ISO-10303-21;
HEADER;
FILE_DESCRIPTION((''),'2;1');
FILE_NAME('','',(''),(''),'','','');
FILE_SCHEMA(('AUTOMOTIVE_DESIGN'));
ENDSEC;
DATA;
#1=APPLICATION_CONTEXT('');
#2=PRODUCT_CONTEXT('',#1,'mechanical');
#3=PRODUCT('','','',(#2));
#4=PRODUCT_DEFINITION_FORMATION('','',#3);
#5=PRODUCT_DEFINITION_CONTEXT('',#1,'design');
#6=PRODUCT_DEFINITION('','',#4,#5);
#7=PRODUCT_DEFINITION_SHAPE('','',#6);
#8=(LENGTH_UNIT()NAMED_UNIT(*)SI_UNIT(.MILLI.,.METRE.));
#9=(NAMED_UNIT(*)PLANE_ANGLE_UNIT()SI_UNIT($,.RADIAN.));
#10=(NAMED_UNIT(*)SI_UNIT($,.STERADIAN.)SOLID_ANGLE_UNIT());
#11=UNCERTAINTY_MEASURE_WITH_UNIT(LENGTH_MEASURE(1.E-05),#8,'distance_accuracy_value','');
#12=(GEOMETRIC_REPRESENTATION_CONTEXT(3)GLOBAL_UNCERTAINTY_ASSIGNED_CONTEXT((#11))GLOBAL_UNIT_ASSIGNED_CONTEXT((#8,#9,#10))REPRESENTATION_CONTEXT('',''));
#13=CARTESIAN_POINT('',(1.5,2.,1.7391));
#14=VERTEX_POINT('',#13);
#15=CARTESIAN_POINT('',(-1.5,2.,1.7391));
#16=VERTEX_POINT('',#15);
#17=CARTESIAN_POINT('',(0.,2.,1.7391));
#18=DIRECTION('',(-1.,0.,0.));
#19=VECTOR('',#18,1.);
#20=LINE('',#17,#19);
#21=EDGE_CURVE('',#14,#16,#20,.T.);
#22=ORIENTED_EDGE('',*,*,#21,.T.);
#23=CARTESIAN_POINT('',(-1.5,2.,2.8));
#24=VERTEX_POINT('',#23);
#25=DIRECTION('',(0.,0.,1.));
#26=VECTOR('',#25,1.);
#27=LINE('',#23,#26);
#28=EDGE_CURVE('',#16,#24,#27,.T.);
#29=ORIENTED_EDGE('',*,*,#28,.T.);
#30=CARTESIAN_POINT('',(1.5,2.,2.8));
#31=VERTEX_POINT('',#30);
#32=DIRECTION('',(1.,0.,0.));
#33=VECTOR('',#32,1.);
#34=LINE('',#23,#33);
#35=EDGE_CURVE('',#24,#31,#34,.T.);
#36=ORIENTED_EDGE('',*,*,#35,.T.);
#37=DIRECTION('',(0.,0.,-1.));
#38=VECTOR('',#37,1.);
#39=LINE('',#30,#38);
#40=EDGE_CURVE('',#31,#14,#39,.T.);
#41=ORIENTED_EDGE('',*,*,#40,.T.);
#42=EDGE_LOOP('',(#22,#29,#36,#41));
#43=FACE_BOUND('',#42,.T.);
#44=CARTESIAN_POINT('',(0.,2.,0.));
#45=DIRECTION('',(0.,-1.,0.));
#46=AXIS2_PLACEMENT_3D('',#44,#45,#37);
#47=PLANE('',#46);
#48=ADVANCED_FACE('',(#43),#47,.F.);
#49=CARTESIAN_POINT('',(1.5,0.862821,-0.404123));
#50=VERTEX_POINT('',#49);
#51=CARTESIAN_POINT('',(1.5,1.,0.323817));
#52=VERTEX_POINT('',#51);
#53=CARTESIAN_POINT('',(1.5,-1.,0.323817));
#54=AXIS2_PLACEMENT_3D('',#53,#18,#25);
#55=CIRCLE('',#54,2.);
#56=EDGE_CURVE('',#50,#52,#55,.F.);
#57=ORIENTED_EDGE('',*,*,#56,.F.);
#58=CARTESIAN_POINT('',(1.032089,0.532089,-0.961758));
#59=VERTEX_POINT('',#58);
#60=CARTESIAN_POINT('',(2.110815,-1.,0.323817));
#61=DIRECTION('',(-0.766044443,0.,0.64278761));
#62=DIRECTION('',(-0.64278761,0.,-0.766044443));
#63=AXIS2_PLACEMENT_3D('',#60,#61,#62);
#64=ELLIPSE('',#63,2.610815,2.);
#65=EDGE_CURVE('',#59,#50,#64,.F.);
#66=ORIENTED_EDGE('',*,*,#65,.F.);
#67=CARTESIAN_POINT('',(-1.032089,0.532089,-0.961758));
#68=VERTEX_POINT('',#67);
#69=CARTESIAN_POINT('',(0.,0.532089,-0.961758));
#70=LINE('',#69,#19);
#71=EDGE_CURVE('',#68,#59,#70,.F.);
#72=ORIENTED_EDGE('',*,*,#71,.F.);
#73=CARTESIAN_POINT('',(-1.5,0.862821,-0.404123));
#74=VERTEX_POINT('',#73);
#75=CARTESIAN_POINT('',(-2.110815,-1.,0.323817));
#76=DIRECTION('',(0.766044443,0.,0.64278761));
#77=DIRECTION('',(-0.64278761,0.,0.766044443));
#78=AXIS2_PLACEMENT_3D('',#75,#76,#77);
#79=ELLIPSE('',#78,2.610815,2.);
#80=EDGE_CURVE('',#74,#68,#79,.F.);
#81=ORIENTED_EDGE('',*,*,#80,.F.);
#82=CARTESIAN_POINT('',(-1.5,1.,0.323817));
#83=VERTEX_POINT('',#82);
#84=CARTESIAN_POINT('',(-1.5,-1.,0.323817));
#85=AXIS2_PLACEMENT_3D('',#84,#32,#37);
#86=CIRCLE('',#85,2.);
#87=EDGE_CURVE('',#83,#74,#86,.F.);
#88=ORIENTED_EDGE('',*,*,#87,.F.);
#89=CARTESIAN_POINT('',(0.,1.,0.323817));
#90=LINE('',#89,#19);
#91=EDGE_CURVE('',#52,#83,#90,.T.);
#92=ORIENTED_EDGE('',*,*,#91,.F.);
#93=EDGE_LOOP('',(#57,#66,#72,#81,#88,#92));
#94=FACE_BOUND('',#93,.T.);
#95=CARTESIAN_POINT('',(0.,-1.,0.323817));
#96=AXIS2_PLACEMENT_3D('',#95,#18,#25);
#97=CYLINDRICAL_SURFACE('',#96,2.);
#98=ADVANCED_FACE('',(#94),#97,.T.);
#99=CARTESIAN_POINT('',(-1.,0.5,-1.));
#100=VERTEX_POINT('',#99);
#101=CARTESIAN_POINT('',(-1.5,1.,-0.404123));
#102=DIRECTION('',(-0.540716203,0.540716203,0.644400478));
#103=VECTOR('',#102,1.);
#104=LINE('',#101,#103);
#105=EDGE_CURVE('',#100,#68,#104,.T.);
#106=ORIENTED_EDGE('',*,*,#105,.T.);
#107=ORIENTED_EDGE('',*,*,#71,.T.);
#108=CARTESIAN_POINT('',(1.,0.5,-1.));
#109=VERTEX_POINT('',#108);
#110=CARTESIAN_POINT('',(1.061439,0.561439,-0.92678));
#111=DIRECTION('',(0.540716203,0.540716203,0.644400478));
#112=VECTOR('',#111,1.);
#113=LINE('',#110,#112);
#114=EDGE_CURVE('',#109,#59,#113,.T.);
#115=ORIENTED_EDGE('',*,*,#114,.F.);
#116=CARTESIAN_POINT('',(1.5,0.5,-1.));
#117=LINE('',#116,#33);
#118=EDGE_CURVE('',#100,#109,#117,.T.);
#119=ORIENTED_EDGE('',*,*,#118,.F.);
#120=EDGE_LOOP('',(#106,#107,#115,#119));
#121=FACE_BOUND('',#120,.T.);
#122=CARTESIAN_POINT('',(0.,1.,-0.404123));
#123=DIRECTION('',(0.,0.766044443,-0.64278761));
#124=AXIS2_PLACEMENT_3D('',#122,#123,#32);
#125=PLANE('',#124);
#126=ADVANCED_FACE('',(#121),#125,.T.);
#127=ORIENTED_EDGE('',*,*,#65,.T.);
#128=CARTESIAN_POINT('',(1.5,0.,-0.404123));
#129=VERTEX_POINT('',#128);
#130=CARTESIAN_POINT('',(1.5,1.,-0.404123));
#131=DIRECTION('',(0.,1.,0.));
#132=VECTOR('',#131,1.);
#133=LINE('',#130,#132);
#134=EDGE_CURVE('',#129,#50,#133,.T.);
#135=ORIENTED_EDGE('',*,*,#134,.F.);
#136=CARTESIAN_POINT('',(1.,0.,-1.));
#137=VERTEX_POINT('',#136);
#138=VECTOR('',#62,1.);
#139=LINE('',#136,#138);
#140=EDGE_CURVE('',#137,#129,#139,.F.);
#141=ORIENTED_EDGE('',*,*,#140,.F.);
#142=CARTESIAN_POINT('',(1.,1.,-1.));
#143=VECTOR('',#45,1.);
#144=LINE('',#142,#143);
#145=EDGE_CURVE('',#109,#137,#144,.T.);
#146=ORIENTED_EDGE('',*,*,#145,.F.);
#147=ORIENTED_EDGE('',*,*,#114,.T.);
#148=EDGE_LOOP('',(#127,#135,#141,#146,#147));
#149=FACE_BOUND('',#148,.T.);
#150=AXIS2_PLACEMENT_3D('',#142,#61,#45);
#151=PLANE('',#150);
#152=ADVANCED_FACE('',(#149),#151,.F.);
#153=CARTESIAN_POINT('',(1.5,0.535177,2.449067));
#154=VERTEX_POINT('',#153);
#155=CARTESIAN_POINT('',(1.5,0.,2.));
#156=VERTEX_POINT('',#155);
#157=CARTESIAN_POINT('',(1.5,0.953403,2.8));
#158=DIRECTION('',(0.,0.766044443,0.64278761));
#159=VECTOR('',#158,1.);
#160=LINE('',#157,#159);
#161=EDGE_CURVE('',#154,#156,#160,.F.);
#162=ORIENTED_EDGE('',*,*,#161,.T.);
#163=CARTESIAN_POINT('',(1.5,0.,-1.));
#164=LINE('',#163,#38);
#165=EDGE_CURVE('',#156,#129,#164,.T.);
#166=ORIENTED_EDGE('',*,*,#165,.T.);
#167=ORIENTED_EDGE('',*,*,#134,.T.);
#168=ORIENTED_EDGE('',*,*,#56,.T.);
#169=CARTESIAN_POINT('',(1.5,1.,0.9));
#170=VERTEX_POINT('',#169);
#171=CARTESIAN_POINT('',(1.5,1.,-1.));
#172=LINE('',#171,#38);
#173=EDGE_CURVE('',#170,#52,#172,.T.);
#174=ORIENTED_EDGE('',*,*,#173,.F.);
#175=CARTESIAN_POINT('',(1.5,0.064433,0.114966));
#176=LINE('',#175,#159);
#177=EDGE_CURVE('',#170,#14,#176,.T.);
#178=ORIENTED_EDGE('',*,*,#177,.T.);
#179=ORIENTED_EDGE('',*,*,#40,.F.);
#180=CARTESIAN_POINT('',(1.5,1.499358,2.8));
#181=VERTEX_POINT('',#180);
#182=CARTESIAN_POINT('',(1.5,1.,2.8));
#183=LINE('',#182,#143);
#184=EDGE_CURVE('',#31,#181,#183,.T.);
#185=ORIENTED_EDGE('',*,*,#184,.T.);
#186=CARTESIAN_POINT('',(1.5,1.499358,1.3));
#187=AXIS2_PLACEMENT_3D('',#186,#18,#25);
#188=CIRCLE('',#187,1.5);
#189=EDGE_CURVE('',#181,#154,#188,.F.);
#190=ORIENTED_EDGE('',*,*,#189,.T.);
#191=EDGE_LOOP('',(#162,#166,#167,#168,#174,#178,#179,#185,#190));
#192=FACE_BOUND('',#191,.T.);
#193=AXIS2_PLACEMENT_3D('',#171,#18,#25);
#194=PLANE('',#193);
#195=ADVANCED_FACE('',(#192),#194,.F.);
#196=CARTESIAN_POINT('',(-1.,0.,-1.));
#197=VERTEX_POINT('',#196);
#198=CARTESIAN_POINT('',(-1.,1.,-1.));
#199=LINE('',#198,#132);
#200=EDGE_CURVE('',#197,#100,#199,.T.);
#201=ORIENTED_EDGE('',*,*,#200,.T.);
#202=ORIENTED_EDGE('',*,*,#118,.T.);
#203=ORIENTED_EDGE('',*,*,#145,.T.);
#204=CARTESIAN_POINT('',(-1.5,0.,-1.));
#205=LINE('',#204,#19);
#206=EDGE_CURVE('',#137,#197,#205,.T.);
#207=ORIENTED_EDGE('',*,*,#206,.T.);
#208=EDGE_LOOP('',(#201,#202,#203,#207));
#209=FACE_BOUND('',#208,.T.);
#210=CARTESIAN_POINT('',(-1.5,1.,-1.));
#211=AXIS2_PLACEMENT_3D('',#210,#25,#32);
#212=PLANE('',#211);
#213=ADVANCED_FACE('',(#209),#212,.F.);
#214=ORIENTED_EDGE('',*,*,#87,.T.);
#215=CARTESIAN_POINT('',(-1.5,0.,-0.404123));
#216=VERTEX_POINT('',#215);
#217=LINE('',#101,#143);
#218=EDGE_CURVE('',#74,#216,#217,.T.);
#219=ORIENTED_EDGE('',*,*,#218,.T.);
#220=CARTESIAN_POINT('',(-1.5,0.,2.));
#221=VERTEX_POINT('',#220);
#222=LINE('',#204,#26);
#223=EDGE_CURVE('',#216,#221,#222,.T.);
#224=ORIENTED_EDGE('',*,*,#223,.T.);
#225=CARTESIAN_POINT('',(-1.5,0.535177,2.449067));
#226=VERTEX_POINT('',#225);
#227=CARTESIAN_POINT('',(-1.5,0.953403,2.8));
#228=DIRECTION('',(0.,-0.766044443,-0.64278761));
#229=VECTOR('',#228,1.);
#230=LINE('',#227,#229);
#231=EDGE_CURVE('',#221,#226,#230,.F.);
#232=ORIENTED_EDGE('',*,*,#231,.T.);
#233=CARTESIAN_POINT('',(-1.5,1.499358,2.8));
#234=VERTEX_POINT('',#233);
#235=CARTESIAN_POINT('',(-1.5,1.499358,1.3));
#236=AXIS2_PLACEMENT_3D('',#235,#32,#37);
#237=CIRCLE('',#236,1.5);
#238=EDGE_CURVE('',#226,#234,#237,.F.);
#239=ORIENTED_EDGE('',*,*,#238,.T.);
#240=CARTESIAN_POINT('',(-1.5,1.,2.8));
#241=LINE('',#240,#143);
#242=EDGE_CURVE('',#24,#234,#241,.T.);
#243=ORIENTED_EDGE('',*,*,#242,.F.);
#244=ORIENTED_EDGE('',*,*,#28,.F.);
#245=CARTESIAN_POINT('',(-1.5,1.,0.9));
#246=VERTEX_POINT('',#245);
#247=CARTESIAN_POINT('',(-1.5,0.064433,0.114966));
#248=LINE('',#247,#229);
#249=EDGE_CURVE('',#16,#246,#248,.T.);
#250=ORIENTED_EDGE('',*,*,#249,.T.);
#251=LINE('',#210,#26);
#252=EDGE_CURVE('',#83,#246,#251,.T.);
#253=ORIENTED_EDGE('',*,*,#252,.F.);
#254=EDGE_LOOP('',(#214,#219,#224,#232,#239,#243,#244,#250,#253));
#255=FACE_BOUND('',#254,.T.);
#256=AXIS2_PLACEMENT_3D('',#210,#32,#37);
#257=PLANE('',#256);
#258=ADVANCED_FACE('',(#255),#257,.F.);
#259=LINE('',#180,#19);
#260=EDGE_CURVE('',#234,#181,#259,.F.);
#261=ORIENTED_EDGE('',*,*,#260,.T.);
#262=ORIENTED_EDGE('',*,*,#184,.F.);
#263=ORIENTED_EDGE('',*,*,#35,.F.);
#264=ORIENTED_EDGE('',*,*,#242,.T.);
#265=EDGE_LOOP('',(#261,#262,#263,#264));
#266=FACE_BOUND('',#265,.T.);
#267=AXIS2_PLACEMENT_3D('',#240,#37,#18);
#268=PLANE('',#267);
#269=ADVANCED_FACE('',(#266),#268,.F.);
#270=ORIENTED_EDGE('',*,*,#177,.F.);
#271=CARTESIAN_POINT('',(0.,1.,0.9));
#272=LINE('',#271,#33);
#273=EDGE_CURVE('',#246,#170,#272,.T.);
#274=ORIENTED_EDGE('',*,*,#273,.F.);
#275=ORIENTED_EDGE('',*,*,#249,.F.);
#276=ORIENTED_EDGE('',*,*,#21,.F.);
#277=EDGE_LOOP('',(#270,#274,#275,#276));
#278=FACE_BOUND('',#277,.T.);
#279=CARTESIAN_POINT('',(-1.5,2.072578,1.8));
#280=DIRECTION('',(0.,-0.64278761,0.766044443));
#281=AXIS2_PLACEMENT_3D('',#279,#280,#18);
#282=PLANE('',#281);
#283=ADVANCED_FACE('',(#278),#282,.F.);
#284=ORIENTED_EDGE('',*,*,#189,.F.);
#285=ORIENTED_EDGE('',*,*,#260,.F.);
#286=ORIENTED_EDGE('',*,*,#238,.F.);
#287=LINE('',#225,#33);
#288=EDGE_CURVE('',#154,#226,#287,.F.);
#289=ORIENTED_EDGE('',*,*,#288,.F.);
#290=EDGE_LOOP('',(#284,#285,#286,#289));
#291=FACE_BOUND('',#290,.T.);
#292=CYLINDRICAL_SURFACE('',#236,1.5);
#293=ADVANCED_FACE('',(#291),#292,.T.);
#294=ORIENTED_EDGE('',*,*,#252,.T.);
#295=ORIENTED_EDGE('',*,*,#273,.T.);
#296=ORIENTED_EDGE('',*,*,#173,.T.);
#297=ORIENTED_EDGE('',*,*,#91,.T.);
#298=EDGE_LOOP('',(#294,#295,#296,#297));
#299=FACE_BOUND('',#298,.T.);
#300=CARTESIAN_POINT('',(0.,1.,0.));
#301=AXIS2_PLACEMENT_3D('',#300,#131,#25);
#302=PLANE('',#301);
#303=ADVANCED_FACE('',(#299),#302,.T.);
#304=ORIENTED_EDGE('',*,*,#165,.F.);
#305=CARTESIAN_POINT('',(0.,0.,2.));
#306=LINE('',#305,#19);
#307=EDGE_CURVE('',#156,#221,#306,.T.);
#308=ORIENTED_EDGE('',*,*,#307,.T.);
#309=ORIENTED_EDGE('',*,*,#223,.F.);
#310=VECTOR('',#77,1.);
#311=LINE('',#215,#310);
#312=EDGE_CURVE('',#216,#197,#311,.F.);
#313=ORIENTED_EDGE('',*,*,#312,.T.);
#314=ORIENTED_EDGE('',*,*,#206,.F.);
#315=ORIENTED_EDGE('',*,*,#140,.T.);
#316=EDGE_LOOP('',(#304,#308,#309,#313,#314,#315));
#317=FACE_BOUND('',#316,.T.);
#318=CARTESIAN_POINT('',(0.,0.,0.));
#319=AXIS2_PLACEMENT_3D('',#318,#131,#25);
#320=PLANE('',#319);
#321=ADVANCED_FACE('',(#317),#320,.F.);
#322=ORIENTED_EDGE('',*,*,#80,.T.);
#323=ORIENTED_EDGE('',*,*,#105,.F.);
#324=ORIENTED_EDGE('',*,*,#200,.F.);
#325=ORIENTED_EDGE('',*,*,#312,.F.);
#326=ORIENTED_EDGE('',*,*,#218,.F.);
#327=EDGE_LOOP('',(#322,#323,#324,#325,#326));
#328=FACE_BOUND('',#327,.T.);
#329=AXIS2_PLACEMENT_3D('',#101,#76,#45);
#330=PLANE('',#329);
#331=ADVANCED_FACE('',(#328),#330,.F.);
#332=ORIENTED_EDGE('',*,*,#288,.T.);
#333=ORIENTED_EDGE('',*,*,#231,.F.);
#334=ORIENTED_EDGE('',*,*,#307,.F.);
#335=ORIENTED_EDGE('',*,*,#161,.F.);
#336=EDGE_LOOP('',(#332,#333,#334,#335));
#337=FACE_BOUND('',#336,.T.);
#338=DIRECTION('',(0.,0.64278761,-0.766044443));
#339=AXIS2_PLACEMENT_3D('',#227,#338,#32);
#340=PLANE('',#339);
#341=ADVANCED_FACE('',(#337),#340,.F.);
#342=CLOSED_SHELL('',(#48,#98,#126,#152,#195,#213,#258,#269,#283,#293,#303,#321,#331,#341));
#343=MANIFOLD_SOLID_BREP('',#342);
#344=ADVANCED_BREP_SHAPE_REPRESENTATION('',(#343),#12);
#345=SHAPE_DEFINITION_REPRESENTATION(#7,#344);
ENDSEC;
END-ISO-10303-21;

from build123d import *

# Parameters (mm, degrees)
SKETCH_1_W       = 3
SKETCH_1_H       = 3.8
EXTRUDE_1_DEPTH  = 1
SKETCH_2_W       = 3
SKETCH_2_H       = 1
EXTRUDE_2_DEPTH  = 1
CHAMFER_1_SIZE   = 0.5
CHAMFER_1_SIZE2  = 0.595876796
FILLET_1_R       = 2
CHAMFER_4_SIZE   = 0.8
CHAMFER_4_SIZE2  = 0.953402874
CHAMFER_3_SIZE   = 0.9
CHAMFER_3_SIZE_2 = 1.072578233
FILLET_2_R       = 1.5


with BuildPart() as part:
    # 草图1 → 凸台-拉伸1 (new body)
    with BuildSketch(Plane(origin=(0, 0, 0), x_dir=(1, 0, 0), z_dir=(0, 1, 0))):
        with Locations((0, -0.9)):
            Rectangle(SKETCH_1_W, SKETCH_1_H)
    extrude(amount=EXTRUDE_1_DEPTH)

    # 草图2 → 凸台-拉伸2 (add)
    with BuildSketch(Plane(origin=(0, 1, 0), x_dir=(1, 0, 0), z_dir=(0, 1, 0))):
        with Locations((0, -2.3)):
            Rectangle(SKETCH_2_W, SKETCH_2_H)
    extrude(amount=EXTRUDE_2_DEPTH)

    # 倒角1
    chamfer_1_edges = [part.edges().sort_by_distance(p)[0] for p in [
        (0, 1, -1),
        (-1.5, 0.5, -1),
        (1.5, 0.5, -1),
    ]]
    chamfer_1_side = [part.faces().sort_by_distance(p)[0] for p in [
        (0, 0.5, -1),
    ]]
    chamfer(chamfer_1_edges, length=CHAMFER_1_SIZE, length2=CHAMFER_1_SIZE2, reference=chamfer_1_side[0])

    # 圆角1
    fillet_1_edges = [part.edges().sort_by_distance(p)[0] for p in [
        (0, 1, -0.404123204),
    ]]
    fillet(fillet_1_edges, radius=FILLET_1_R)

    # 倒角4
    chamfer_4_edges = [part.edges().sort_by_distance(p)[0] for p in [
        (0, 0, 2.8),
    ]]
    chamfer_4_side = [part.faces().sort_by_distance(p)[0] for p in [
        (0, 0, 0.945658616),
    ]]
    chamfer(chamfer_4_edges, length=CHAMFER_4_SIZE, length2=CHAMFER_4_SIZE2, reference=chamfer_4_side[0])

    # 倒角3
    # the kernel refuses this chamfer: 1.072578233, 0.9 mm, written as the material it adds along each edge
    with BuildSketch(Plane(origin=(1.5, 1, 1.8), x_dir=(0, -0.03540953691366302, -0.9993728857116146), z_dir=(-1, 0, 0))) as chamfer_3_piece_1_section:
        Polygon((CHAMFER_3_SIZE * 0.999372885712, -CHAMFER_3_SIZE * 0.0354095369137), (-CHAMFER_3_SIZE_2 * 0.0354095369247, -CHAMFER_3_SIZE_2 * 0.999372886024), (0, 0), align=None)
    chamfer_3_piece_1 = extrude(amount=3, mode=Mode.PRIVATE)
    chamfer_3_piece_1 = split(chamfer_3_piece_1, bisect_by=Plane(origin=(0, 2, 1.501522224), z_dir=(0, -1, 0)), keep=Keep.TOP, mode=Mode.PRIVATE)
    add(chamfer_3_piece_1)

    # 圆角2
    fillet_2_edges = [part.edges().sort_by_distance(p)[0] for p in [
        (0, 0.953402874, 2.8),
    ]]
    fillet(fillet_2_edges, radius=FILLET_2_R)


solid = part.part
